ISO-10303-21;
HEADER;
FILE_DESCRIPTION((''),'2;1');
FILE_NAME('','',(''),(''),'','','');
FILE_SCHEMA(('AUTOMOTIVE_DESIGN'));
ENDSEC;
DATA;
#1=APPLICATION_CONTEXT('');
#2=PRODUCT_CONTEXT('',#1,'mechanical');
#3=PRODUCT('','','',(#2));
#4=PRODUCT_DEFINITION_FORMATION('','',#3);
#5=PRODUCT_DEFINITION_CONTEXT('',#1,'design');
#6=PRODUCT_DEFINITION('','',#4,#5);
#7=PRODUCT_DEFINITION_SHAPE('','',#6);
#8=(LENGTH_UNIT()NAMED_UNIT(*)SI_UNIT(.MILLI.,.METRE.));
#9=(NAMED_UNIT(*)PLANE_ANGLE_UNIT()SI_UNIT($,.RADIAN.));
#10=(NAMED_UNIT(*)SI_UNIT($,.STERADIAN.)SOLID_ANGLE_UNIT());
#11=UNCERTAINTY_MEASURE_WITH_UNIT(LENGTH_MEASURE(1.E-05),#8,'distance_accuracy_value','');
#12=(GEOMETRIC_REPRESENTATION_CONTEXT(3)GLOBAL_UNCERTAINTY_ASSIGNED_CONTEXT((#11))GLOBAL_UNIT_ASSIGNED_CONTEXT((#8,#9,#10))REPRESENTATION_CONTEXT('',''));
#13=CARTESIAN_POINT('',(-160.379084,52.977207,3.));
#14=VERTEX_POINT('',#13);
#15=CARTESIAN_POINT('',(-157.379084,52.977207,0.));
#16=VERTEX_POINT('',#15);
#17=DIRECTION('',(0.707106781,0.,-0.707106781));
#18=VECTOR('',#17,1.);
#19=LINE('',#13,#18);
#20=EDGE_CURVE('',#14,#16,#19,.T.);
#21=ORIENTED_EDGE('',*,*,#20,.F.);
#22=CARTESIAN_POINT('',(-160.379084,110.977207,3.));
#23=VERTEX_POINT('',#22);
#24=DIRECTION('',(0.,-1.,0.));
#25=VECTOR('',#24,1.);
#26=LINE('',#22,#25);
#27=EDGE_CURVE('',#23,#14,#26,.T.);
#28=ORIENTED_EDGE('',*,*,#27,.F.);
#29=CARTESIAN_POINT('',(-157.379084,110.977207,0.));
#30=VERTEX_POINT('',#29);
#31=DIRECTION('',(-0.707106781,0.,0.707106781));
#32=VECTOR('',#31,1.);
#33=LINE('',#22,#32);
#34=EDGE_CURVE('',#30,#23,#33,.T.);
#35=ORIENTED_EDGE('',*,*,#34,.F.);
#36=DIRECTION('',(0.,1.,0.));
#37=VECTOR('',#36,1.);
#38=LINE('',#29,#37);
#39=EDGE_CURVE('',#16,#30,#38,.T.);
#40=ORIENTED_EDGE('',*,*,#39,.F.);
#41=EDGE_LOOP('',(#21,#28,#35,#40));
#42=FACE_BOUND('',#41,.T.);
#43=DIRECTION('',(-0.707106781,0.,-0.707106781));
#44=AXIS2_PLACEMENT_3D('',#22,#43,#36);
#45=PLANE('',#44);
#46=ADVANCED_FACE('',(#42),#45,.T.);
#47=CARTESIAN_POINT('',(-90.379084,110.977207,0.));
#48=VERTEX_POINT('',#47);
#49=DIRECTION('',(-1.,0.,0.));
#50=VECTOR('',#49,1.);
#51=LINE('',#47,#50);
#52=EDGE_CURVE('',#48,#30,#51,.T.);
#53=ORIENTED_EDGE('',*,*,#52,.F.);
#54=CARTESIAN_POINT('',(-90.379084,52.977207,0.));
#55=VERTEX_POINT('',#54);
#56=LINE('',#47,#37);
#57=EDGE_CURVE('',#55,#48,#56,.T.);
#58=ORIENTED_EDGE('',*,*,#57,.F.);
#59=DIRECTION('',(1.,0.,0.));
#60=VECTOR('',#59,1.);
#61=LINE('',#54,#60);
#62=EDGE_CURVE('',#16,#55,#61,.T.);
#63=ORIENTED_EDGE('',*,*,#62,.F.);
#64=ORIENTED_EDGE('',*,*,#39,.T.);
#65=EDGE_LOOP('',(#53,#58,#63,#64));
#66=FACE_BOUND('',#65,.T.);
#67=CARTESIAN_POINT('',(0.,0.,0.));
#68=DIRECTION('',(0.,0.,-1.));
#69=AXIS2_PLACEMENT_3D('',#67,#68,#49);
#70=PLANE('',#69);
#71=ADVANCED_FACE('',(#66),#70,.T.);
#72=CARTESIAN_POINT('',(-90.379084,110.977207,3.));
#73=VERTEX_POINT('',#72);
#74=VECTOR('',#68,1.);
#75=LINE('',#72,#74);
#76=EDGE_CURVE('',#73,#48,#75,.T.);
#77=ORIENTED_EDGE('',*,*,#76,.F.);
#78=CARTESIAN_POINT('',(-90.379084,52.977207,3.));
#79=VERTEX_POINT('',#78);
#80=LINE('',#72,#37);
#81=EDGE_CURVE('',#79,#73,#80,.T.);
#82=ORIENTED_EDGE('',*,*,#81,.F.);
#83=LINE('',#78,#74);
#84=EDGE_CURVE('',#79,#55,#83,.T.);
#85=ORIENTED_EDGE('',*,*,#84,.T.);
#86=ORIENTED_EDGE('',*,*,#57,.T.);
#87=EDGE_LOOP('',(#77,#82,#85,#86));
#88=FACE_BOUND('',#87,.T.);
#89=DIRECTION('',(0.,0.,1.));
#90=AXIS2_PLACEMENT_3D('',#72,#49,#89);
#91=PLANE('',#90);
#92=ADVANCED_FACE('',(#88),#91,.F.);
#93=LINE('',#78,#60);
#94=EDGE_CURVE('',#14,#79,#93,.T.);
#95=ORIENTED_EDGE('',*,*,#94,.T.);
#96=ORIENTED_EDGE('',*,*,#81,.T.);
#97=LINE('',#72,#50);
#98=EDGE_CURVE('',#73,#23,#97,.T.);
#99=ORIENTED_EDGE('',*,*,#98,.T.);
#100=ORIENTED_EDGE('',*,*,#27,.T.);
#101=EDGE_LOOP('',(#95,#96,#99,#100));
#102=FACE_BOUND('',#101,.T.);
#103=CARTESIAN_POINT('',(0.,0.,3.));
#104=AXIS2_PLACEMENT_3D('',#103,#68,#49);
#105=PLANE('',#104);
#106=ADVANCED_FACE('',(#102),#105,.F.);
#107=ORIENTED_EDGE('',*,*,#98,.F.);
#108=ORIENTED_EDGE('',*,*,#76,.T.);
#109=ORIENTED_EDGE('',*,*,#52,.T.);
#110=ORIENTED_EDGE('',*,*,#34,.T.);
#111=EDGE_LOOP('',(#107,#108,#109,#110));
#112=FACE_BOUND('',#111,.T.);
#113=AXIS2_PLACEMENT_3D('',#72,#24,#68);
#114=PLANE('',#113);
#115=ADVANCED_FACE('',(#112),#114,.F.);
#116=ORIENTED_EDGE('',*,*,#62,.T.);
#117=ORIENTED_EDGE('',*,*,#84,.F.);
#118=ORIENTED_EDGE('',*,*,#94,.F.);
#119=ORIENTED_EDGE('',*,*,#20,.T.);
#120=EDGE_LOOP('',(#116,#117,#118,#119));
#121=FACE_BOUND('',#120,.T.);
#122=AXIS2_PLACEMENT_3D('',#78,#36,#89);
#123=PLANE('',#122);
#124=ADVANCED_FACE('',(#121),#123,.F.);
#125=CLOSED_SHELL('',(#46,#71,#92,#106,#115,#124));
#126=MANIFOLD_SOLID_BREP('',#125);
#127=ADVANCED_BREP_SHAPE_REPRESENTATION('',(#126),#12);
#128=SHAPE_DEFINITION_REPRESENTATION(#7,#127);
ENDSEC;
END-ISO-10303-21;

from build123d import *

# Parameters (mm, degrees)
SKETCH1_W           = 70
SKETCH1_H           = 58
BOSS_EXTRUDE1_DEPTH = 3
CHAMFER1_SIZE       = 3


with BuildPart() as part:
    # Sketch1 → Boss-Extrude1 (new body)
    with BuildSketch(Plane.XY):
        with Locations((-125.379084176, 81.977207271)):
            Rectangle(SKETCH1_W, SKETCH1_H)
    extrude(amount=BOSS_EXTRUDE1_DEPTH)

    # Chamfer1
    chamfer1_edges = [part.edges().sort_by_distance(p)[0] for p in [
        (-160.379084176, 81.977207271, 0),
    ]]
    chamfer(chamfer1_edges, length=CHAMFER1_SIZE - 0.0001)  # a hair under: the kernel refuses the full size


solid = part.part
